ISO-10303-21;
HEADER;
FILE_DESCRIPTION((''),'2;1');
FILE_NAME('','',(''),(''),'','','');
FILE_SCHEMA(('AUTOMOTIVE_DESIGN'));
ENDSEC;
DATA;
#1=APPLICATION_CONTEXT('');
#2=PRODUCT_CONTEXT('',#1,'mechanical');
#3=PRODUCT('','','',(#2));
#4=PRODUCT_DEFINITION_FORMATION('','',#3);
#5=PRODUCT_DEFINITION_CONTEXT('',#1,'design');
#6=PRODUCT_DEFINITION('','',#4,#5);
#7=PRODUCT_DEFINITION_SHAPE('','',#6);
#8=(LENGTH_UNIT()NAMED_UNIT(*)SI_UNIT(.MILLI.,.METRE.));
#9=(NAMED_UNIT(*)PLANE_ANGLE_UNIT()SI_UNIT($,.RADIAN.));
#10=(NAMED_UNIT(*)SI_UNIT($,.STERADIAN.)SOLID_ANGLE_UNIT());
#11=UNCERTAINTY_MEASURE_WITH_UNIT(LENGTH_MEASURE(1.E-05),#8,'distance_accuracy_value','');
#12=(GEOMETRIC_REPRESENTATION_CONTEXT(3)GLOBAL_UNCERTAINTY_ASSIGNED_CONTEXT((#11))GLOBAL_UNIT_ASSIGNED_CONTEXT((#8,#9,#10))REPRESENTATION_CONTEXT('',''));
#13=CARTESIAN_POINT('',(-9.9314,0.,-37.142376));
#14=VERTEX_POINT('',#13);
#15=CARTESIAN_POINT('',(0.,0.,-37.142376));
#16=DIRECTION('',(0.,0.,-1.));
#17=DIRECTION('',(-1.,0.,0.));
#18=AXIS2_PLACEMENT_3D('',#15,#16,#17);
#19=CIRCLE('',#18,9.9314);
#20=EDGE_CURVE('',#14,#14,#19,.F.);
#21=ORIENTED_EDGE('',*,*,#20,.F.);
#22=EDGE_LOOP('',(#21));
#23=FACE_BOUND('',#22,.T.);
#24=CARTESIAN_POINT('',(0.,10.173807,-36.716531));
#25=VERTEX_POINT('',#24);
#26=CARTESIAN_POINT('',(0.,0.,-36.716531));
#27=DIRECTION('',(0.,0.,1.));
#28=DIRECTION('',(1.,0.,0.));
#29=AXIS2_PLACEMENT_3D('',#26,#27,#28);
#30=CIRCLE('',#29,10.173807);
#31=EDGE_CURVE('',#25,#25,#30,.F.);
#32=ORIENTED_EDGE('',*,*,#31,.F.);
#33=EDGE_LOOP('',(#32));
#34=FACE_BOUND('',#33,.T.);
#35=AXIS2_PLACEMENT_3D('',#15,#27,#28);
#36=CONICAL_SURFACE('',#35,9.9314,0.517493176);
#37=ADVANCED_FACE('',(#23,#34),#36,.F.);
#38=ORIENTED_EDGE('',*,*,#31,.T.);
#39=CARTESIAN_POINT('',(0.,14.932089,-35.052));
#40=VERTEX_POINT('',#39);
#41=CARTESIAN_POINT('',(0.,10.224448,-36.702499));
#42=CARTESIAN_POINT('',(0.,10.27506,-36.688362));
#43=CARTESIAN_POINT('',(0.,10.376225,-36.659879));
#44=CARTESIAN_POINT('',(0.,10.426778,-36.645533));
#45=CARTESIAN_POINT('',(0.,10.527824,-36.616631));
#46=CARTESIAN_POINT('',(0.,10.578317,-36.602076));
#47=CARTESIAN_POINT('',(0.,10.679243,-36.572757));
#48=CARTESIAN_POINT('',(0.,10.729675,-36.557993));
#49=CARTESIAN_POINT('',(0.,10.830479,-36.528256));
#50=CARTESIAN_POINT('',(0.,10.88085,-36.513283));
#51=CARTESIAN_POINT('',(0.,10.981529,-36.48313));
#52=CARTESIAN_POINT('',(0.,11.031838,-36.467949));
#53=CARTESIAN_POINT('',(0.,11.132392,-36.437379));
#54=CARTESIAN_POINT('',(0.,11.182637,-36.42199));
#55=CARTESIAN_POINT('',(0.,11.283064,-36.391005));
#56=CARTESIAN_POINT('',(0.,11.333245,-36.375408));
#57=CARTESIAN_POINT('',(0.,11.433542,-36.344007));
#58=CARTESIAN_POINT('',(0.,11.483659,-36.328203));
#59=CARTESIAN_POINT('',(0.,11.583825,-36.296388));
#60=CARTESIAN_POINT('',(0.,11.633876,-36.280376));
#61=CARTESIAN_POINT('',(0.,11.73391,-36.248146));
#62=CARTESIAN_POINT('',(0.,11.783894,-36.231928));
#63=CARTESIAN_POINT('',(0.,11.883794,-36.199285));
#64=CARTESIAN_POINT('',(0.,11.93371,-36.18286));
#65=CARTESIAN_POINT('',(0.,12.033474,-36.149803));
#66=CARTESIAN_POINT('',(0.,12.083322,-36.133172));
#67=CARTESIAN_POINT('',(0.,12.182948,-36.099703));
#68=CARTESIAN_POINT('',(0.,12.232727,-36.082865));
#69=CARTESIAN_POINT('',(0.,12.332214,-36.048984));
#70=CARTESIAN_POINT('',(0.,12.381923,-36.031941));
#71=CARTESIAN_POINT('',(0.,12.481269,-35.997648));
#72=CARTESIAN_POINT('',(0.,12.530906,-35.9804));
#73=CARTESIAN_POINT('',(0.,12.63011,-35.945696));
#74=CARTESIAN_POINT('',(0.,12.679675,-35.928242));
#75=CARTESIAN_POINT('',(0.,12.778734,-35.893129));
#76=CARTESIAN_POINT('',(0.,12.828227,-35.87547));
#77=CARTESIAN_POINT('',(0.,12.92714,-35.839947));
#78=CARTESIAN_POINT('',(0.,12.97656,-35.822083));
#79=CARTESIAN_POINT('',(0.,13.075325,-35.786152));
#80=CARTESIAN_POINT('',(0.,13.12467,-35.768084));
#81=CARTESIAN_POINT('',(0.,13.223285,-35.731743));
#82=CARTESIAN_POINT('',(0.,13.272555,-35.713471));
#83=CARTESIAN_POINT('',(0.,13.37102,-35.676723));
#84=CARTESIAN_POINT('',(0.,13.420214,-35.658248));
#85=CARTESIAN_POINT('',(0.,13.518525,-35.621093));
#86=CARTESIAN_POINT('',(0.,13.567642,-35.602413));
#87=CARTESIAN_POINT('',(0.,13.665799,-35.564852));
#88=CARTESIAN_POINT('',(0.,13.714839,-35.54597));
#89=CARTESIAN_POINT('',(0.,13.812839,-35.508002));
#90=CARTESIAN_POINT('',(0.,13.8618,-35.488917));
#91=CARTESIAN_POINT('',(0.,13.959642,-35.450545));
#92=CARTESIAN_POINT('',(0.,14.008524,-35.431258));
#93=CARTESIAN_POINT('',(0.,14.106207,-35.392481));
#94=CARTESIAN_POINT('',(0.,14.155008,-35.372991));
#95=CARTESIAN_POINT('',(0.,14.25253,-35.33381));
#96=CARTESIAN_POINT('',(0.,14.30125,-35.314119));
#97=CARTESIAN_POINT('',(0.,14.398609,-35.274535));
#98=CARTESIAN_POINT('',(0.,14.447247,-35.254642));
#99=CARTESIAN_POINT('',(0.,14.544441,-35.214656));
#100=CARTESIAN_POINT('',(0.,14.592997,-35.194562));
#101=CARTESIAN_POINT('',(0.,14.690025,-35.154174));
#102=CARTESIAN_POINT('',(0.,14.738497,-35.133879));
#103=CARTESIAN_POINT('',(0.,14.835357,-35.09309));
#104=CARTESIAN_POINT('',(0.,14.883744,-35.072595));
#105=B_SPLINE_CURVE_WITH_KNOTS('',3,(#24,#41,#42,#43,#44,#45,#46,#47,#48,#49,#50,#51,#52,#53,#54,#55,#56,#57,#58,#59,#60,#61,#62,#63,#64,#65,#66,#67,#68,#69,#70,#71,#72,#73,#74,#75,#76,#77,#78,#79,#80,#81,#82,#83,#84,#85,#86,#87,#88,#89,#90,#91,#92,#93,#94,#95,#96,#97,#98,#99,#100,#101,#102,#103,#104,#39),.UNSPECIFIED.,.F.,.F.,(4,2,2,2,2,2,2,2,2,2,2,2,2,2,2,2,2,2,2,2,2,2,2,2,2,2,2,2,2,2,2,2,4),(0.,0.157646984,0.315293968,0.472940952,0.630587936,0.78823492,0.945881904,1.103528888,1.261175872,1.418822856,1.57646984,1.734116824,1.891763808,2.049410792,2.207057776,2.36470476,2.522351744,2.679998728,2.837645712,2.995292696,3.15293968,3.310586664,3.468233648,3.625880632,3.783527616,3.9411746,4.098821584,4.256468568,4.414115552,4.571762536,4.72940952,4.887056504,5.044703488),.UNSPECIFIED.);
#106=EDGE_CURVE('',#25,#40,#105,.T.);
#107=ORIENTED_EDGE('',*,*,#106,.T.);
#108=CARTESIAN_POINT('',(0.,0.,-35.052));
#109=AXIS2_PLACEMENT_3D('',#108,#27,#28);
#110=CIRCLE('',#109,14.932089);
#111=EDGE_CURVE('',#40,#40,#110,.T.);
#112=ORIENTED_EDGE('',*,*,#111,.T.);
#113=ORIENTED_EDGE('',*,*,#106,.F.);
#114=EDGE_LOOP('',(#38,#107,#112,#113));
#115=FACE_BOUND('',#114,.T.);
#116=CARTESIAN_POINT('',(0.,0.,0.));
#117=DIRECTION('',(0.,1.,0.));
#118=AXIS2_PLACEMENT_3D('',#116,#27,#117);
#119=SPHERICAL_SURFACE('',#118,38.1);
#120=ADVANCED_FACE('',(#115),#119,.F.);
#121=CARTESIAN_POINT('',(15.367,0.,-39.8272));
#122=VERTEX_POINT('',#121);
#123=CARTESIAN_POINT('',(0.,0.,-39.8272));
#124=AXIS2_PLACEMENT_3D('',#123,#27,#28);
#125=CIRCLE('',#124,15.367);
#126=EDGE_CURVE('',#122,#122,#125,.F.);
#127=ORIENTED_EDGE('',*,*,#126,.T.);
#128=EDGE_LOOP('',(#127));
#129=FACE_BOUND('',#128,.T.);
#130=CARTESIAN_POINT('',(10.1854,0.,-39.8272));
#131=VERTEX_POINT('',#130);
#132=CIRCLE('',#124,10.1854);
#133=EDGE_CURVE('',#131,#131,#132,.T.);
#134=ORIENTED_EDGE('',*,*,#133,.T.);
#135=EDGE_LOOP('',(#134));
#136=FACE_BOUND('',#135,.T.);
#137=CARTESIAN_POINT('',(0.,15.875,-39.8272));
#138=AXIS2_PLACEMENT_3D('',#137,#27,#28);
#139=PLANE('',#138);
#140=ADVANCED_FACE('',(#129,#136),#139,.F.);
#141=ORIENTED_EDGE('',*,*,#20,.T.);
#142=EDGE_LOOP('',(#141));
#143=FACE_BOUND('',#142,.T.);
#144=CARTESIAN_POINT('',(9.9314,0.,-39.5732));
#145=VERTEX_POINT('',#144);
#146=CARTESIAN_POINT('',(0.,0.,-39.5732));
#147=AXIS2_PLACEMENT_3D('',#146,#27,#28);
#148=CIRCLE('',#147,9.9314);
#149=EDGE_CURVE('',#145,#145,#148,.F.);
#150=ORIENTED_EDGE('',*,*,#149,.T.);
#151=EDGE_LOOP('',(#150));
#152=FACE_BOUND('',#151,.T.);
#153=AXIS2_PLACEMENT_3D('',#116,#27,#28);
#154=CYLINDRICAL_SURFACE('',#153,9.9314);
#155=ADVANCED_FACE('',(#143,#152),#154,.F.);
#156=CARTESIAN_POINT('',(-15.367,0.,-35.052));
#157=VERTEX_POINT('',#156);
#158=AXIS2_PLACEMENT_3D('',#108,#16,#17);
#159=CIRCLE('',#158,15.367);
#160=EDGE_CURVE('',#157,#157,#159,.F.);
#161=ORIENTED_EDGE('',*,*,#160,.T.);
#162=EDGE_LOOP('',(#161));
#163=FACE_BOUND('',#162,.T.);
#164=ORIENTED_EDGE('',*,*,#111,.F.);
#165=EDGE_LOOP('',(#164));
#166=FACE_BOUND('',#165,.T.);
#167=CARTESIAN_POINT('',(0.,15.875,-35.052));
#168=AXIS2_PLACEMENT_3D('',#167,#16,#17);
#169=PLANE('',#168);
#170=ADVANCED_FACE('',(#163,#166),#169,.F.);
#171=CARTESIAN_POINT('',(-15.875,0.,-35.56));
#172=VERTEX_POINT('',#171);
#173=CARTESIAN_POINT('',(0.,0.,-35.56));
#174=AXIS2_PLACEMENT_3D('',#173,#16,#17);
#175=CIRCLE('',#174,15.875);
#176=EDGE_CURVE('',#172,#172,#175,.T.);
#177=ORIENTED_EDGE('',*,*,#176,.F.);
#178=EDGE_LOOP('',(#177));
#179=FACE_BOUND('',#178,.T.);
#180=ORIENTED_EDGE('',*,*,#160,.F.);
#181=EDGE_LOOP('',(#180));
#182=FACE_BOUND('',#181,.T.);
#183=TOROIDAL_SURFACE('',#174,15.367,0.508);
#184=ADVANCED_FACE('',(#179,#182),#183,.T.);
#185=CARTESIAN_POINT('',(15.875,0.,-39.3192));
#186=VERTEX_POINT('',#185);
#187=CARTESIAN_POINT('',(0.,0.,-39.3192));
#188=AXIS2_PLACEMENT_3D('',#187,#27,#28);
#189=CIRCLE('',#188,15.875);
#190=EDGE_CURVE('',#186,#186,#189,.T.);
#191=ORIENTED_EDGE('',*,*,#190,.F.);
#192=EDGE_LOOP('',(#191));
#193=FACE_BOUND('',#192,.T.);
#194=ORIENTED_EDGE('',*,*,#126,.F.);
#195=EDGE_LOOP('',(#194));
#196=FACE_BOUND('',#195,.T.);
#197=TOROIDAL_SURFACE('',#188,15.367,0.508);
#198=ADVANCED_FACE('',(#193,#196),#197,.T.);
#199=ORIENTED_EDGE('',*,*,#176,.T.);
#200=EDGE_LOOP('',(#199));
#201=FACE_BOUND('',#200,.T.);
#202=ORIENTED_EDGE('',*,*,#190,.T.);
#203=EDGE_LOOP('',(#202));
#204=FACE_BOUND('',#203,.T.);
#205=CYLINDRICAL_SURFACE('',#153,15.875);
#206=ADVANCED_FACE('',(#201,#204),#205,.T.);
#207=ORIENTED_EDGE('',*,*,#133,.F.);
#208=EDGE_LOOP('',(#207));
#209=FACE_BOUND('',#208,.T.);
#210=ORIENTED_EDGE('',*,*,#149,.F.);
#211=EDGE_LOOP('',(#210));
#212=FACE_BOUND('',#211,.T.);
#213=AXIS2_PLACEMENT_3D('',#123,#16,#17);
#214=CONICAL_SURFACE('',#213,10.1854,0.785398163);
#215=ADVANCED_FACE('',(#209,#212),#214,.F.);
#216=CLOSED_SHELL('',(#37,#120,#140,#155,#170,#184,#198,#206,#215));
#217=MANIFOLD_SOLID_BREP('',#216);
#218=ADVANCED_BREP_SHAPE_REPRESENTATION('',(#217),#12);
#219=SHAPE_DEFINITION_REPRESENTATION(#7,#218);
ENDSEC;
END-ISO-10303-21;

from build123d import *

# Parameters (mm, degrees)
FILLET2_R = 0.508


with BuildPart() as part:
    # Sketch1 → Revolve1 (revolve)
    with BuildSketch(Plane(origin=(0, 0, 0), x_dir=(0, 0, -1), z_dir=(1, 0, 0)), mode=Mode.PRIVATE) as revolve1_sk:
        with BuildLine():
            Line((39.8272, 15.875), (39.8272, 9.9314))
            Line((39.8272, 9.9314), (36.782839668, 9.9314))
            ThreePointArc((36.782839668, 9.9314), (36.004343784, 12.461830872), (35.052, 14.932089472))
            Line((35.052, 14.932089472), (35.052, 15.875))
            Line((35.052, 15.875), (39.8272, 15.875))
        make_face()
    revolve(revolve1_sk.sketch.rotate(Axis((0, 0, 0), (0, 0, -1)), 90), axis=Axis((0, 0, 0), (0, 0, -1)))

    # Chamfer1: read off the stored shape, not the designer's step
    # Chamfer1 outline → Chamfer1 (revolve, cut)
    with BuildSketch(Plane.XZ):
        Polygon((9.9314, -36.716530911), (9.9314, -37.142376439), (10.173807442, -36.716530911), align=None)
        Polygon((9.9314, -39.5732), (9.9314, -39.8272), (10.1854, -39.8272), align=None)
    revolve(axis=Axis((0, 0, 0), (0, 0, 1)), mode=Mode.SUBTRACT)

    # Fillet2
    fillet2_edges = [part.edges().sort_by_distance(p)[0] for p in [
        (-15.875, 0, -39.8272),
        (-15.875, 0, -35.052),
    ]]
    fillet(fillet2_edges, radius=FILLET2_R)


solid = part.part
